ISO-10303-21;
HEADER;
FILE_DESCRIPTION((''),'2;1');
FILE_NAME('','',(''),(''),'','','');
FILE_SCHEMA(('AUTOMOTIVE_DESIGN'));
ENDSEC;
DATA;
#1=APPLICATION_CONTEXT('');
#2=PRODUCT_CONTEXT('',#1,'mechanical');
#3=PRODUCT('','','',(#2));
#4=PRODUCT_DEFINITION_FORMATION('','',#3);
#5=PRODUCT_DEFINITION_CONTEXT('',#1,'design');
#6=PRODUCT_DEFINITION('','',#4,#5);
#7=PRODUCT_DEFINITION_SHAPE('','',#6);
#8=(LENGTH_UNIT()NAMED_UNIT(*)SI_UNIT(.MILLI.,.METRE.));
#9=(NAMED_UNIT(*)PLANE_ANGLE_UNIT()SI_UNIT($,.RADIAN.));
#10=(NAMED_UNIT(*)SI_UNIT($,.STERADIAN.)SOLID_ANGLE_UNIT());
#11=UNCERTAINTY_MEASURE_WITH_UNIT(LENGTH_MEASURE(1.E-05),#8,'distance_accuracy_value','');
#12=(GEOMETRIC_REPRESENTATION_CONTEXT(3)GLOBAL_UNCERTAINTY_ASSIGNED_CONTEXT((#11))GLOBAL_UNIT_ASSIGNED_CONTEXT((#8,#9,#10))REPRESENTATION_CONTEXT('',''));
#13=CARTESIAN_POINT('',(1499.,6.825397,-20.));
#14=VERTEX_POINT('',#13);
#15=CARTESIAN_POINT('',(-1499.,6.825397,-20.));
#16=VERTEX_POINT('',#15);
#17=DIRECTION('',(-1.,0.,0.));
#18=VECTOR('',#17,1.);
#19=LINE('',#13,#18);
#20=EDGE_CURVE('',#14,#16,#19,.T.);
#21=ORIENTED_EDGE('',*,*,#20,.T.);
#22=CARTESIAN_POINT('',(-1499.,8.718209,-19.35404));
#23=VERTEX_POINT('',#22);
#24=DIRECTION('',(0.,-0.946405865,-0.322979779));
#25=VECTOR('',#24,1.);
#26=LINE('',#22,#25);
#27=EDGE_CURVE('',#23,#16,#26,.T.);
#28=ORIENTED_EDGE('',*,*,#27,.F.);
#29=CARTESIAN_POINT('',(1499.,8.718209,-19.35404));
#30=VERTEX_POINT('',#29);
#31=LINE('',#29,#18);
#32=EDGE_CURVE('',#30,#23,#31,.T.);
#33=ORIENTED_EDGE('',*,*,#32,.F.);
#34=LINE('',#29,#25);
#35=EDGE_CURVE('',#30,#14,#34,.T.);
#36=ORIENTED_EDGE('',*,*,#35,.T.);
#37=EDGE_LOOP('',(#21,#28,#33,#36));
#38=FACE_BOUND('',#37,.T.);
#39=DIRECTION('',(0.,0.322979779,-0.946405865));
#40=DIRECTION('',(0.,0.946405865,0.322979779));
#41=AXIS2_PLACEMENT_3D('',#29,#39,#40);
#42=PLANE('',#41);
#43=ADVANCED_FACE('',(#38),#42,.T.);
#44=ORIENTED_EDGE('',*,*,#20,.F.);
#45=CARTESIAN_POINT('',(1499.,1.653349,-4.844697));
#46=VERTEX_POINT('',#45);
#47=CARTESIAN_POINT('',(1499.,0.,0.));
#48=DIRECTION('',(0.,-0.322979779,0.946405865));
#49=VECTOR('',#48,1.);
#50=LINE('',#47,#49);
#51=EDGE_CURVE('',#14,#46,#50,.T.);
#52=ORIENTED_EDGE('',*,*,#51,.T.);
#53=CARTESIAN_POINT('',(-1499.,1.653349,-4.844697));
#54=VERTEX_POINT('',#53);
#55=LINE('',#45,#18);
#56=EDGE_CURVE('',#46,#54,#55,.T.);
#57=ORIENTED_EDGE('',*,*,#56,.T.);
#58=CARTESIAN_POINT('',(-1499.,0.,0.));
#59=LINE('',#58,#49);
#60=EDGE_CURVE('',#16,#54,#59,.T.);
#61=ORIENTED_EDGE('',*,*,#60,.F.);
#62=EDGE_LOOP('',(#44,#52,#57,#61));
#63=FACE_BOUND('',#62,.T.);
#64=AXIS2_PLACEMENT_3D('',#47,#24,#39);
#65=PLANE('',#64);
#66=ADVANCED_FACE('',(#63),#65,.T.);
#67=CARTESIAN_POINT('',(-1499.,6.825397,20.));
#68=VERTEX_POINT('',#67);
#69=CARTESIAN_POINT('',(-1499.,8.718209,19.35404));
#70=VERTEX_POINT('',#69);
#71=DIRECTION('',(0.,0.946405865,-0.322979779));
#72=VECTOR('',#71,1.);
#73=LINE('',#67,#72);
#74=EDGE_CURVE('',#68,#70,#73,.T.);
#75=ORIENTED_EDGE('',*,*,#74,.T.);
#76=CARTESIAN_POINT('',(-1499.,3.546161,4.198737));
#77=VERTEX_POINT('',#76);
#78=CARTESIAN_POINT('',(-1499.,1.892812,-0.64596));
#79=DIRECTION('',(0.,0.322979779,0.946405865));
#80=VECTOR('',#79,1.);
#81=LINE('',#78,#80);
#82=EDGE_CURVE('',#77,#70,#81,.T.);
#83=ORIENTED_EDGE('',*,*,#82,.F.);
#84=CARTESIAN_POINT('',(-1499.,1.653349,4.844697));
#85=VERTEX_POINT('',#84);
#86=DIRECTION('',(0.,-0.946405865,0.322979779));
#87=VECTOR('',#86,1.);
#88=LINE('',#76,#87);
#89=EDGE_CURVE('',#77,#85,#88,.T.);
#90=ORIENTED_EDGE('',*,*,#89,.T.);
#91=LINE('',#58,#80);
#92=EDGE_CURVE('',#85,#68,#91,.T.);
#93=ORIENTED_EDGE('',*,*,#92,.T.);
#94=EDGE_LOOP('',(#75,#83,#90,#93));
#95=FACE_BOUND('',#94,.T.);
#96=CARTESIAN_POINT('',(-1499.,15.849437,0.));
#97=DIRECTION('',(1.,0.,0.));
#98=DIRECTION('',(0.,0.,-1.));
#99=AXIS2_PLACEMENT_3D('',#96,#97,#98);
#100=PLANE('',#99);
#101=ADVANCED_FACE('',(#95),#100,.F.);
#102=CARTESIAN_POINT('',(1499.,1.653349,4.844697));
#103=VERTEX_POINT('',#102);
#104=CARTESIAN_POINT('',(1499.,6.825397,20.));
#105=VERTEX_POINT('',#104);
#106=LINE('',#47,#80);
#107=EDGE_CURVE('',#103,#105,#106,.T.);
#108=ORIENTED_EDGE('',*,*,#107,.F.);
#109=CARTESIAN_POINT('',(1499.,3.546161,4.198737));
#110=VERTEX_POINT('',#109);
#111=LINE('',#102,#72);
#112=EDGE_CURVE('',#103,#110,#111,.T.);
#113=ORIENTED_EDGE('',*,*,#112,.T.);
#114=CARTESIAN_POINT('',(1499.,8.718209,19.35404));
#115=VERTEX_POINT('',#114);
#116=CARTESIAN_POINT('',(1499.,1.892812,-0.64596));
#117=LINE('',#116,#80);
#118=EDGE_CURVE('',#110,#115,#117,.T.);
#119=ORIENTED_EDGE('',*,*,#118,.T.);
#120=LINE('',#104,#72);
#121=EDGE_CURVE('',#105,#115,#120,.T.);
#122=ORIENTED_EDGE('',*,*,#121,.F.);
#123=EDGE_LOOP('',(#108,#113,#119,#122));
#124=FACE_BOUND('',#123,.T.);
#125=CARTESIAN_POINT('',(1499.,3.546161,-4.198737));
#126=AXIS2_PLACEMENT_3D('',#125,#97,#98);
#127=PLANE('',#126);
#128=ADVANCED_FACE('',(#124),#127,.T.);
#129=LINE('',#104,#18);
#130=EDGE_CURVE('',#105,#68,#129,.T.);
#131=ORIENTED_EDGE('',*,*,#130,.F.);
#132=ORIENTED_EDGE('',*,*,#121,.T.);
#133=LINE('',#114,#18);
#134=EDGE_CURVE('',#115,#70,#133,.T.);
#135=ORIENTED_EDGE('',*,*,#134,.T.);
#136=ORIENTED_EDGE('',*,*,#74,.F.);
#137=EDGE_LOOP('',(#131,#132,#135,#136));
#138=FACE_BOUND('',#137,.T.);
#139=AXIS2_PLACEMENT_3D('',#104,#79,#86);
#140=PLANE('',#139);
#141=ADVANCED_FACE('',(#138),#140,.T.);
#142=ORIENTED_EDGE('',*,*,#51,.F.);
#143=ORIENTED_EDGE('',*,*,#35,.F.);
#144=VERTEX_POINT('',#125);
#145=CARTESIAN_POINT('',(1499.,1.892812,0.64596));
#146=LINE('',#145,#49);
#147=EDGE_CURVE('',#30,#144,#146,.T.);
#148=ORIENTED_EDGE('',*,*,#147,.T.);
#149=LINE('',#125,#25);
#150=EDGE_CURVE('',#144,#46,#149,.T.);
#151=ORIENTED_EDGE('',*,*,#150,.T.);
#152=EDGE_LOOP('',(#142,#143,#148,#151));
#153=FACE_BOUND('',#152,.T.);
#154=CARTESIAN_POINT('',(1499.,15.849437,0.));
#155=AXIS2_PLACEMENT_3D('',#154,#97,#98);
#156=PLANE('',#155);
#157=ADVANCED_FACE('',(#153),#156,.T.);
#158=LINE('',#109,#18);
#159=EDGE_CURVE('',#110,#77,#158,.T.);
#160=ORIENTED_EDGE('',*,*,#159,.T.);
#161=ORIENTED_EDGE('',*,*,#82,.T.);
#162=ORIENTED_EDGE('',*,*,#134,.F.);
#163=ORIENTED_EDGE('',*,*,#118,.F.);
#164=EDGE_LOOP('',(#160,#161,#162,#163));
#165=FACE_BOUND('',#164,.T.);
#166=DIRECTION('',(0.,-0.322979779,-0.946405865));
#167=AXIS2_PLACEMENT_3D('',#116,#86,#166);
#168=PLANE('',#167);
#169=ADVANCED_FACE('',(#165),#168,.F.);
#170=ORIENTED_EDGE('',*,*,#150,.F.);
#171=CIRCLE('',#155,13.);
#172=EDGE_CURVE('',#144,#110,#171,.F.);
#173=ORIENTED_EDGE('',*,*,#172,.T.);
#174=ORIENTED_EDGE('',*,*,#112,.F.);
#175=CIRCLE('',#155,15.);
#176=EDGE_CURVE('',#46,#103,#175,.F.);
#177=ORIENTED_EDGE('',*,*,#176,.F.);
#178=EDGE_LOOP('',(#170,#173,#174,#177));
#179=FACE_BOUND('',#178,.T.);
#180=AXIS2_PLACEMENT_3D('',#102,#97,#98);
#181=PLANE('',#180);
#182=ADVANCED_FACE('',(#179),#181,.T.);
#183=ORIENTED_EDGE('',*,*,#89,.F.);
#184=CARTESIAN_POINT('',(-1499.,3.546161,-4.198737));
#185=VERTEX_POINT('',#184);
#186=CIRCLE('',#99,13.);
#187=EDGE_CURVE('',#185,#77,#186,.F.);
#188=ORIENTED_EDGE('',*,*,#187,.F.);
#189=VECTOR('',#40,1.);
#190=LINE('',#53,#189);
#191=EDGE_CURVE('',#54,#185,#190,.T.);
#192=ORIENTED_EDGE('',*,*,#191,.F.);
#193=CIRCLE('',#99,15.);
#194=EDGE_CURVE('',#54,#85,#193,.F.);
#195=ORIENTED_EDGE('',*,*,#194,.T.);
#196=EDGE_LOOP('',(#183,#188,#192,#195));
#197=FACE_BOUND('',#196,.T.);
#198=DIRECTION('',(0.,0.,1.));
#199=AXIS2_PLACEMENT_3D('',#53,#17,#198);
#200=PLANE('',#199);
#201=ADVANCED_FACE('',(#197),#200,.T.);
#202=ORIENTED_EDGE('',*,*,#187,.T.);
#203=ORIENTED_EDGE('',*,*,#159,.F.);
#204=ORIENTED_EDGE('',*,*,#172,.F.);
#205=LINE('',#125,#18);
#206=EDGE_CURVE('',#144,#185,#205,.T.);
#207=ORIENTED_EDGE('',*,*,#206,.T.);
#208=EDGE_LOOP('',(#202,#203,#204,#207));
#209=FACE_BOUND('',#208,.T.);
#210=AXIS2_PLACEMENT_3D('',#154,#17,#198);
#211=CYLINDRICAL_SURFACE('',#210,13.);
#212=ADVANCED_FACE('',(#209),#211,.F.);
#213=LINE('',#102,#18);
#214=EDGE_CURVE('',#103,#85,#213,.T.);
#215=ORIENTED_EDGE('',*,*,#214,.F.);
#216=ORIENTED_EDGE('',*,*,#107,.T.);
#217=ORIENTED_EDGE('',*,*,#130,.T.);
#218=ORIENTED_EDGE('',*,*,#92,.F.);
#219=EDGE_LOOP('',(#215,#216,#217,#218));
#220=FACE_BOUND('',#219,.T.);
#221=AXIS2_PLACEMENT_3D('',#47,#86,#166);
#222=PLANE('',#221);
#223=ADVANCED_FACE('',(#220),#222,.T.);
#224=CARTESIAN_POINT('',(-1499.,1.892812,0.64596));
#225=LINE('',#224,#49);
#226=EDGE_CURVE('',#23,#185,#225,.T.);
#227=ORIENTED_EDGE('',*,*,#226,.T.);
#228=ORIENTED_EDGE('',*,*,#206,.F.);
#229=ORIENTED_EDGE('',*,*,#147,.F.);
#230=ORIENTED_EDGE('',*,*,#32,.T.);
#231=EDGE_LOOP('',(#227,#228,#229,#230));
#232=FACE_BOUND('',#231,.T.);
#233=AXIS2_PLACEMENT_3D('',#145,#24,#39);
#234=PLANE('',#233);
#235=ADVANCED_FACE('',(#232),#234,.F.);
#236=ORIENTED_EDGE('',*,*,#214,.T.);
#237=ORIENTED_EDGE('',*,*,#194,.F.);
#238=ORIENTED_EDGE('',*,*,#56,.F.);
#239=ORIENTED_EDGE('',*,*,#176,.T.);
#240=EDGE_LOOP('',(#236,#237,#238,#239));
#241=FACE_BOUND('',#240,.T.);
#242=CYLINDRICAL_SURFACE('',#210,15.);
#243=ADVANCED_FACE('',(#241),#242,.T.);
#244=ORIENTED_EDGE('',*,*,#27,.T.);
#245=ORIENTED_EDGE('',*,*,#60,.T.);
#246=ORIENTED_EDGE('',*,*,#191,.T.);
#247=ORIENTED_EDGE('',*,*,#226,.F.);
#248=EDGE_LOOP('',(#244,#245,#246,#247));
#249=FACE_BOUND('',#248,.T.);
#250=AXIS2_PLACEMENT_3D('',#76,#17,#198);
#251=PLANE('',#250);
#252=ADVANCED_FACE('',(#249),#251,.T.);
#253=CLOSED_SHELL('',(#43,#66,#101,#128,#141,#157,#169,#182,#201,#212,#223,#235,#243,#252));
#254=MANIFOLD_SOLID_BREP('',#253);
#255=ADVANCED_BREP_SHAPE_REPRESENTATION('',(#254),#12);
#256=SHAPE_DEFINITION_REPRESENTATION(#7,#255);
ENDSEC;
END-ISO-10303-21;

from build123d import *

# Parameters (mm, degrees)
BASE_FLANGE1_DEPTH = 1499


# Sheet-metal steps are written as plain solids
with BuildPart() as part:
    # Sketch1 → Base-Flange1 (new, symmetric)
    with BuildSketch(Plane(origin=(0, 0, 0), x_dir=(0, 0, -1), z_dir=(1, 0, 0))):
        with BuildLine():
            Line((-20, 6.825396825), (-4.844696692, 1.653348871))
            ThreePointArc((-4.844696692, 1.653348871), (0, 0.849436852), (4.844696692, 1.653348871))
            Line((4.844696692, 1.653348871), (20, 6.825396825))
            Line((20, 6.825396825), (19.354040441, 8.718208556))
            Line((19.354040441, 8.718208556), (4.198737133, 3.546160602))
            ThreePointArc((4.198737133, 3.546160602), (0, 2.849436852), (-4.198737133, 3.546160602))
            Line((-4.198737133, 3.546160602), (-19.354040441, 8.718208556))
            Line((-19.354040441, 8.718208556), (-20, 6.825396825))
        make_face()
    extrude(amount=BASE_FLANGE1_DEPTH, both=True)


solid = part.part
